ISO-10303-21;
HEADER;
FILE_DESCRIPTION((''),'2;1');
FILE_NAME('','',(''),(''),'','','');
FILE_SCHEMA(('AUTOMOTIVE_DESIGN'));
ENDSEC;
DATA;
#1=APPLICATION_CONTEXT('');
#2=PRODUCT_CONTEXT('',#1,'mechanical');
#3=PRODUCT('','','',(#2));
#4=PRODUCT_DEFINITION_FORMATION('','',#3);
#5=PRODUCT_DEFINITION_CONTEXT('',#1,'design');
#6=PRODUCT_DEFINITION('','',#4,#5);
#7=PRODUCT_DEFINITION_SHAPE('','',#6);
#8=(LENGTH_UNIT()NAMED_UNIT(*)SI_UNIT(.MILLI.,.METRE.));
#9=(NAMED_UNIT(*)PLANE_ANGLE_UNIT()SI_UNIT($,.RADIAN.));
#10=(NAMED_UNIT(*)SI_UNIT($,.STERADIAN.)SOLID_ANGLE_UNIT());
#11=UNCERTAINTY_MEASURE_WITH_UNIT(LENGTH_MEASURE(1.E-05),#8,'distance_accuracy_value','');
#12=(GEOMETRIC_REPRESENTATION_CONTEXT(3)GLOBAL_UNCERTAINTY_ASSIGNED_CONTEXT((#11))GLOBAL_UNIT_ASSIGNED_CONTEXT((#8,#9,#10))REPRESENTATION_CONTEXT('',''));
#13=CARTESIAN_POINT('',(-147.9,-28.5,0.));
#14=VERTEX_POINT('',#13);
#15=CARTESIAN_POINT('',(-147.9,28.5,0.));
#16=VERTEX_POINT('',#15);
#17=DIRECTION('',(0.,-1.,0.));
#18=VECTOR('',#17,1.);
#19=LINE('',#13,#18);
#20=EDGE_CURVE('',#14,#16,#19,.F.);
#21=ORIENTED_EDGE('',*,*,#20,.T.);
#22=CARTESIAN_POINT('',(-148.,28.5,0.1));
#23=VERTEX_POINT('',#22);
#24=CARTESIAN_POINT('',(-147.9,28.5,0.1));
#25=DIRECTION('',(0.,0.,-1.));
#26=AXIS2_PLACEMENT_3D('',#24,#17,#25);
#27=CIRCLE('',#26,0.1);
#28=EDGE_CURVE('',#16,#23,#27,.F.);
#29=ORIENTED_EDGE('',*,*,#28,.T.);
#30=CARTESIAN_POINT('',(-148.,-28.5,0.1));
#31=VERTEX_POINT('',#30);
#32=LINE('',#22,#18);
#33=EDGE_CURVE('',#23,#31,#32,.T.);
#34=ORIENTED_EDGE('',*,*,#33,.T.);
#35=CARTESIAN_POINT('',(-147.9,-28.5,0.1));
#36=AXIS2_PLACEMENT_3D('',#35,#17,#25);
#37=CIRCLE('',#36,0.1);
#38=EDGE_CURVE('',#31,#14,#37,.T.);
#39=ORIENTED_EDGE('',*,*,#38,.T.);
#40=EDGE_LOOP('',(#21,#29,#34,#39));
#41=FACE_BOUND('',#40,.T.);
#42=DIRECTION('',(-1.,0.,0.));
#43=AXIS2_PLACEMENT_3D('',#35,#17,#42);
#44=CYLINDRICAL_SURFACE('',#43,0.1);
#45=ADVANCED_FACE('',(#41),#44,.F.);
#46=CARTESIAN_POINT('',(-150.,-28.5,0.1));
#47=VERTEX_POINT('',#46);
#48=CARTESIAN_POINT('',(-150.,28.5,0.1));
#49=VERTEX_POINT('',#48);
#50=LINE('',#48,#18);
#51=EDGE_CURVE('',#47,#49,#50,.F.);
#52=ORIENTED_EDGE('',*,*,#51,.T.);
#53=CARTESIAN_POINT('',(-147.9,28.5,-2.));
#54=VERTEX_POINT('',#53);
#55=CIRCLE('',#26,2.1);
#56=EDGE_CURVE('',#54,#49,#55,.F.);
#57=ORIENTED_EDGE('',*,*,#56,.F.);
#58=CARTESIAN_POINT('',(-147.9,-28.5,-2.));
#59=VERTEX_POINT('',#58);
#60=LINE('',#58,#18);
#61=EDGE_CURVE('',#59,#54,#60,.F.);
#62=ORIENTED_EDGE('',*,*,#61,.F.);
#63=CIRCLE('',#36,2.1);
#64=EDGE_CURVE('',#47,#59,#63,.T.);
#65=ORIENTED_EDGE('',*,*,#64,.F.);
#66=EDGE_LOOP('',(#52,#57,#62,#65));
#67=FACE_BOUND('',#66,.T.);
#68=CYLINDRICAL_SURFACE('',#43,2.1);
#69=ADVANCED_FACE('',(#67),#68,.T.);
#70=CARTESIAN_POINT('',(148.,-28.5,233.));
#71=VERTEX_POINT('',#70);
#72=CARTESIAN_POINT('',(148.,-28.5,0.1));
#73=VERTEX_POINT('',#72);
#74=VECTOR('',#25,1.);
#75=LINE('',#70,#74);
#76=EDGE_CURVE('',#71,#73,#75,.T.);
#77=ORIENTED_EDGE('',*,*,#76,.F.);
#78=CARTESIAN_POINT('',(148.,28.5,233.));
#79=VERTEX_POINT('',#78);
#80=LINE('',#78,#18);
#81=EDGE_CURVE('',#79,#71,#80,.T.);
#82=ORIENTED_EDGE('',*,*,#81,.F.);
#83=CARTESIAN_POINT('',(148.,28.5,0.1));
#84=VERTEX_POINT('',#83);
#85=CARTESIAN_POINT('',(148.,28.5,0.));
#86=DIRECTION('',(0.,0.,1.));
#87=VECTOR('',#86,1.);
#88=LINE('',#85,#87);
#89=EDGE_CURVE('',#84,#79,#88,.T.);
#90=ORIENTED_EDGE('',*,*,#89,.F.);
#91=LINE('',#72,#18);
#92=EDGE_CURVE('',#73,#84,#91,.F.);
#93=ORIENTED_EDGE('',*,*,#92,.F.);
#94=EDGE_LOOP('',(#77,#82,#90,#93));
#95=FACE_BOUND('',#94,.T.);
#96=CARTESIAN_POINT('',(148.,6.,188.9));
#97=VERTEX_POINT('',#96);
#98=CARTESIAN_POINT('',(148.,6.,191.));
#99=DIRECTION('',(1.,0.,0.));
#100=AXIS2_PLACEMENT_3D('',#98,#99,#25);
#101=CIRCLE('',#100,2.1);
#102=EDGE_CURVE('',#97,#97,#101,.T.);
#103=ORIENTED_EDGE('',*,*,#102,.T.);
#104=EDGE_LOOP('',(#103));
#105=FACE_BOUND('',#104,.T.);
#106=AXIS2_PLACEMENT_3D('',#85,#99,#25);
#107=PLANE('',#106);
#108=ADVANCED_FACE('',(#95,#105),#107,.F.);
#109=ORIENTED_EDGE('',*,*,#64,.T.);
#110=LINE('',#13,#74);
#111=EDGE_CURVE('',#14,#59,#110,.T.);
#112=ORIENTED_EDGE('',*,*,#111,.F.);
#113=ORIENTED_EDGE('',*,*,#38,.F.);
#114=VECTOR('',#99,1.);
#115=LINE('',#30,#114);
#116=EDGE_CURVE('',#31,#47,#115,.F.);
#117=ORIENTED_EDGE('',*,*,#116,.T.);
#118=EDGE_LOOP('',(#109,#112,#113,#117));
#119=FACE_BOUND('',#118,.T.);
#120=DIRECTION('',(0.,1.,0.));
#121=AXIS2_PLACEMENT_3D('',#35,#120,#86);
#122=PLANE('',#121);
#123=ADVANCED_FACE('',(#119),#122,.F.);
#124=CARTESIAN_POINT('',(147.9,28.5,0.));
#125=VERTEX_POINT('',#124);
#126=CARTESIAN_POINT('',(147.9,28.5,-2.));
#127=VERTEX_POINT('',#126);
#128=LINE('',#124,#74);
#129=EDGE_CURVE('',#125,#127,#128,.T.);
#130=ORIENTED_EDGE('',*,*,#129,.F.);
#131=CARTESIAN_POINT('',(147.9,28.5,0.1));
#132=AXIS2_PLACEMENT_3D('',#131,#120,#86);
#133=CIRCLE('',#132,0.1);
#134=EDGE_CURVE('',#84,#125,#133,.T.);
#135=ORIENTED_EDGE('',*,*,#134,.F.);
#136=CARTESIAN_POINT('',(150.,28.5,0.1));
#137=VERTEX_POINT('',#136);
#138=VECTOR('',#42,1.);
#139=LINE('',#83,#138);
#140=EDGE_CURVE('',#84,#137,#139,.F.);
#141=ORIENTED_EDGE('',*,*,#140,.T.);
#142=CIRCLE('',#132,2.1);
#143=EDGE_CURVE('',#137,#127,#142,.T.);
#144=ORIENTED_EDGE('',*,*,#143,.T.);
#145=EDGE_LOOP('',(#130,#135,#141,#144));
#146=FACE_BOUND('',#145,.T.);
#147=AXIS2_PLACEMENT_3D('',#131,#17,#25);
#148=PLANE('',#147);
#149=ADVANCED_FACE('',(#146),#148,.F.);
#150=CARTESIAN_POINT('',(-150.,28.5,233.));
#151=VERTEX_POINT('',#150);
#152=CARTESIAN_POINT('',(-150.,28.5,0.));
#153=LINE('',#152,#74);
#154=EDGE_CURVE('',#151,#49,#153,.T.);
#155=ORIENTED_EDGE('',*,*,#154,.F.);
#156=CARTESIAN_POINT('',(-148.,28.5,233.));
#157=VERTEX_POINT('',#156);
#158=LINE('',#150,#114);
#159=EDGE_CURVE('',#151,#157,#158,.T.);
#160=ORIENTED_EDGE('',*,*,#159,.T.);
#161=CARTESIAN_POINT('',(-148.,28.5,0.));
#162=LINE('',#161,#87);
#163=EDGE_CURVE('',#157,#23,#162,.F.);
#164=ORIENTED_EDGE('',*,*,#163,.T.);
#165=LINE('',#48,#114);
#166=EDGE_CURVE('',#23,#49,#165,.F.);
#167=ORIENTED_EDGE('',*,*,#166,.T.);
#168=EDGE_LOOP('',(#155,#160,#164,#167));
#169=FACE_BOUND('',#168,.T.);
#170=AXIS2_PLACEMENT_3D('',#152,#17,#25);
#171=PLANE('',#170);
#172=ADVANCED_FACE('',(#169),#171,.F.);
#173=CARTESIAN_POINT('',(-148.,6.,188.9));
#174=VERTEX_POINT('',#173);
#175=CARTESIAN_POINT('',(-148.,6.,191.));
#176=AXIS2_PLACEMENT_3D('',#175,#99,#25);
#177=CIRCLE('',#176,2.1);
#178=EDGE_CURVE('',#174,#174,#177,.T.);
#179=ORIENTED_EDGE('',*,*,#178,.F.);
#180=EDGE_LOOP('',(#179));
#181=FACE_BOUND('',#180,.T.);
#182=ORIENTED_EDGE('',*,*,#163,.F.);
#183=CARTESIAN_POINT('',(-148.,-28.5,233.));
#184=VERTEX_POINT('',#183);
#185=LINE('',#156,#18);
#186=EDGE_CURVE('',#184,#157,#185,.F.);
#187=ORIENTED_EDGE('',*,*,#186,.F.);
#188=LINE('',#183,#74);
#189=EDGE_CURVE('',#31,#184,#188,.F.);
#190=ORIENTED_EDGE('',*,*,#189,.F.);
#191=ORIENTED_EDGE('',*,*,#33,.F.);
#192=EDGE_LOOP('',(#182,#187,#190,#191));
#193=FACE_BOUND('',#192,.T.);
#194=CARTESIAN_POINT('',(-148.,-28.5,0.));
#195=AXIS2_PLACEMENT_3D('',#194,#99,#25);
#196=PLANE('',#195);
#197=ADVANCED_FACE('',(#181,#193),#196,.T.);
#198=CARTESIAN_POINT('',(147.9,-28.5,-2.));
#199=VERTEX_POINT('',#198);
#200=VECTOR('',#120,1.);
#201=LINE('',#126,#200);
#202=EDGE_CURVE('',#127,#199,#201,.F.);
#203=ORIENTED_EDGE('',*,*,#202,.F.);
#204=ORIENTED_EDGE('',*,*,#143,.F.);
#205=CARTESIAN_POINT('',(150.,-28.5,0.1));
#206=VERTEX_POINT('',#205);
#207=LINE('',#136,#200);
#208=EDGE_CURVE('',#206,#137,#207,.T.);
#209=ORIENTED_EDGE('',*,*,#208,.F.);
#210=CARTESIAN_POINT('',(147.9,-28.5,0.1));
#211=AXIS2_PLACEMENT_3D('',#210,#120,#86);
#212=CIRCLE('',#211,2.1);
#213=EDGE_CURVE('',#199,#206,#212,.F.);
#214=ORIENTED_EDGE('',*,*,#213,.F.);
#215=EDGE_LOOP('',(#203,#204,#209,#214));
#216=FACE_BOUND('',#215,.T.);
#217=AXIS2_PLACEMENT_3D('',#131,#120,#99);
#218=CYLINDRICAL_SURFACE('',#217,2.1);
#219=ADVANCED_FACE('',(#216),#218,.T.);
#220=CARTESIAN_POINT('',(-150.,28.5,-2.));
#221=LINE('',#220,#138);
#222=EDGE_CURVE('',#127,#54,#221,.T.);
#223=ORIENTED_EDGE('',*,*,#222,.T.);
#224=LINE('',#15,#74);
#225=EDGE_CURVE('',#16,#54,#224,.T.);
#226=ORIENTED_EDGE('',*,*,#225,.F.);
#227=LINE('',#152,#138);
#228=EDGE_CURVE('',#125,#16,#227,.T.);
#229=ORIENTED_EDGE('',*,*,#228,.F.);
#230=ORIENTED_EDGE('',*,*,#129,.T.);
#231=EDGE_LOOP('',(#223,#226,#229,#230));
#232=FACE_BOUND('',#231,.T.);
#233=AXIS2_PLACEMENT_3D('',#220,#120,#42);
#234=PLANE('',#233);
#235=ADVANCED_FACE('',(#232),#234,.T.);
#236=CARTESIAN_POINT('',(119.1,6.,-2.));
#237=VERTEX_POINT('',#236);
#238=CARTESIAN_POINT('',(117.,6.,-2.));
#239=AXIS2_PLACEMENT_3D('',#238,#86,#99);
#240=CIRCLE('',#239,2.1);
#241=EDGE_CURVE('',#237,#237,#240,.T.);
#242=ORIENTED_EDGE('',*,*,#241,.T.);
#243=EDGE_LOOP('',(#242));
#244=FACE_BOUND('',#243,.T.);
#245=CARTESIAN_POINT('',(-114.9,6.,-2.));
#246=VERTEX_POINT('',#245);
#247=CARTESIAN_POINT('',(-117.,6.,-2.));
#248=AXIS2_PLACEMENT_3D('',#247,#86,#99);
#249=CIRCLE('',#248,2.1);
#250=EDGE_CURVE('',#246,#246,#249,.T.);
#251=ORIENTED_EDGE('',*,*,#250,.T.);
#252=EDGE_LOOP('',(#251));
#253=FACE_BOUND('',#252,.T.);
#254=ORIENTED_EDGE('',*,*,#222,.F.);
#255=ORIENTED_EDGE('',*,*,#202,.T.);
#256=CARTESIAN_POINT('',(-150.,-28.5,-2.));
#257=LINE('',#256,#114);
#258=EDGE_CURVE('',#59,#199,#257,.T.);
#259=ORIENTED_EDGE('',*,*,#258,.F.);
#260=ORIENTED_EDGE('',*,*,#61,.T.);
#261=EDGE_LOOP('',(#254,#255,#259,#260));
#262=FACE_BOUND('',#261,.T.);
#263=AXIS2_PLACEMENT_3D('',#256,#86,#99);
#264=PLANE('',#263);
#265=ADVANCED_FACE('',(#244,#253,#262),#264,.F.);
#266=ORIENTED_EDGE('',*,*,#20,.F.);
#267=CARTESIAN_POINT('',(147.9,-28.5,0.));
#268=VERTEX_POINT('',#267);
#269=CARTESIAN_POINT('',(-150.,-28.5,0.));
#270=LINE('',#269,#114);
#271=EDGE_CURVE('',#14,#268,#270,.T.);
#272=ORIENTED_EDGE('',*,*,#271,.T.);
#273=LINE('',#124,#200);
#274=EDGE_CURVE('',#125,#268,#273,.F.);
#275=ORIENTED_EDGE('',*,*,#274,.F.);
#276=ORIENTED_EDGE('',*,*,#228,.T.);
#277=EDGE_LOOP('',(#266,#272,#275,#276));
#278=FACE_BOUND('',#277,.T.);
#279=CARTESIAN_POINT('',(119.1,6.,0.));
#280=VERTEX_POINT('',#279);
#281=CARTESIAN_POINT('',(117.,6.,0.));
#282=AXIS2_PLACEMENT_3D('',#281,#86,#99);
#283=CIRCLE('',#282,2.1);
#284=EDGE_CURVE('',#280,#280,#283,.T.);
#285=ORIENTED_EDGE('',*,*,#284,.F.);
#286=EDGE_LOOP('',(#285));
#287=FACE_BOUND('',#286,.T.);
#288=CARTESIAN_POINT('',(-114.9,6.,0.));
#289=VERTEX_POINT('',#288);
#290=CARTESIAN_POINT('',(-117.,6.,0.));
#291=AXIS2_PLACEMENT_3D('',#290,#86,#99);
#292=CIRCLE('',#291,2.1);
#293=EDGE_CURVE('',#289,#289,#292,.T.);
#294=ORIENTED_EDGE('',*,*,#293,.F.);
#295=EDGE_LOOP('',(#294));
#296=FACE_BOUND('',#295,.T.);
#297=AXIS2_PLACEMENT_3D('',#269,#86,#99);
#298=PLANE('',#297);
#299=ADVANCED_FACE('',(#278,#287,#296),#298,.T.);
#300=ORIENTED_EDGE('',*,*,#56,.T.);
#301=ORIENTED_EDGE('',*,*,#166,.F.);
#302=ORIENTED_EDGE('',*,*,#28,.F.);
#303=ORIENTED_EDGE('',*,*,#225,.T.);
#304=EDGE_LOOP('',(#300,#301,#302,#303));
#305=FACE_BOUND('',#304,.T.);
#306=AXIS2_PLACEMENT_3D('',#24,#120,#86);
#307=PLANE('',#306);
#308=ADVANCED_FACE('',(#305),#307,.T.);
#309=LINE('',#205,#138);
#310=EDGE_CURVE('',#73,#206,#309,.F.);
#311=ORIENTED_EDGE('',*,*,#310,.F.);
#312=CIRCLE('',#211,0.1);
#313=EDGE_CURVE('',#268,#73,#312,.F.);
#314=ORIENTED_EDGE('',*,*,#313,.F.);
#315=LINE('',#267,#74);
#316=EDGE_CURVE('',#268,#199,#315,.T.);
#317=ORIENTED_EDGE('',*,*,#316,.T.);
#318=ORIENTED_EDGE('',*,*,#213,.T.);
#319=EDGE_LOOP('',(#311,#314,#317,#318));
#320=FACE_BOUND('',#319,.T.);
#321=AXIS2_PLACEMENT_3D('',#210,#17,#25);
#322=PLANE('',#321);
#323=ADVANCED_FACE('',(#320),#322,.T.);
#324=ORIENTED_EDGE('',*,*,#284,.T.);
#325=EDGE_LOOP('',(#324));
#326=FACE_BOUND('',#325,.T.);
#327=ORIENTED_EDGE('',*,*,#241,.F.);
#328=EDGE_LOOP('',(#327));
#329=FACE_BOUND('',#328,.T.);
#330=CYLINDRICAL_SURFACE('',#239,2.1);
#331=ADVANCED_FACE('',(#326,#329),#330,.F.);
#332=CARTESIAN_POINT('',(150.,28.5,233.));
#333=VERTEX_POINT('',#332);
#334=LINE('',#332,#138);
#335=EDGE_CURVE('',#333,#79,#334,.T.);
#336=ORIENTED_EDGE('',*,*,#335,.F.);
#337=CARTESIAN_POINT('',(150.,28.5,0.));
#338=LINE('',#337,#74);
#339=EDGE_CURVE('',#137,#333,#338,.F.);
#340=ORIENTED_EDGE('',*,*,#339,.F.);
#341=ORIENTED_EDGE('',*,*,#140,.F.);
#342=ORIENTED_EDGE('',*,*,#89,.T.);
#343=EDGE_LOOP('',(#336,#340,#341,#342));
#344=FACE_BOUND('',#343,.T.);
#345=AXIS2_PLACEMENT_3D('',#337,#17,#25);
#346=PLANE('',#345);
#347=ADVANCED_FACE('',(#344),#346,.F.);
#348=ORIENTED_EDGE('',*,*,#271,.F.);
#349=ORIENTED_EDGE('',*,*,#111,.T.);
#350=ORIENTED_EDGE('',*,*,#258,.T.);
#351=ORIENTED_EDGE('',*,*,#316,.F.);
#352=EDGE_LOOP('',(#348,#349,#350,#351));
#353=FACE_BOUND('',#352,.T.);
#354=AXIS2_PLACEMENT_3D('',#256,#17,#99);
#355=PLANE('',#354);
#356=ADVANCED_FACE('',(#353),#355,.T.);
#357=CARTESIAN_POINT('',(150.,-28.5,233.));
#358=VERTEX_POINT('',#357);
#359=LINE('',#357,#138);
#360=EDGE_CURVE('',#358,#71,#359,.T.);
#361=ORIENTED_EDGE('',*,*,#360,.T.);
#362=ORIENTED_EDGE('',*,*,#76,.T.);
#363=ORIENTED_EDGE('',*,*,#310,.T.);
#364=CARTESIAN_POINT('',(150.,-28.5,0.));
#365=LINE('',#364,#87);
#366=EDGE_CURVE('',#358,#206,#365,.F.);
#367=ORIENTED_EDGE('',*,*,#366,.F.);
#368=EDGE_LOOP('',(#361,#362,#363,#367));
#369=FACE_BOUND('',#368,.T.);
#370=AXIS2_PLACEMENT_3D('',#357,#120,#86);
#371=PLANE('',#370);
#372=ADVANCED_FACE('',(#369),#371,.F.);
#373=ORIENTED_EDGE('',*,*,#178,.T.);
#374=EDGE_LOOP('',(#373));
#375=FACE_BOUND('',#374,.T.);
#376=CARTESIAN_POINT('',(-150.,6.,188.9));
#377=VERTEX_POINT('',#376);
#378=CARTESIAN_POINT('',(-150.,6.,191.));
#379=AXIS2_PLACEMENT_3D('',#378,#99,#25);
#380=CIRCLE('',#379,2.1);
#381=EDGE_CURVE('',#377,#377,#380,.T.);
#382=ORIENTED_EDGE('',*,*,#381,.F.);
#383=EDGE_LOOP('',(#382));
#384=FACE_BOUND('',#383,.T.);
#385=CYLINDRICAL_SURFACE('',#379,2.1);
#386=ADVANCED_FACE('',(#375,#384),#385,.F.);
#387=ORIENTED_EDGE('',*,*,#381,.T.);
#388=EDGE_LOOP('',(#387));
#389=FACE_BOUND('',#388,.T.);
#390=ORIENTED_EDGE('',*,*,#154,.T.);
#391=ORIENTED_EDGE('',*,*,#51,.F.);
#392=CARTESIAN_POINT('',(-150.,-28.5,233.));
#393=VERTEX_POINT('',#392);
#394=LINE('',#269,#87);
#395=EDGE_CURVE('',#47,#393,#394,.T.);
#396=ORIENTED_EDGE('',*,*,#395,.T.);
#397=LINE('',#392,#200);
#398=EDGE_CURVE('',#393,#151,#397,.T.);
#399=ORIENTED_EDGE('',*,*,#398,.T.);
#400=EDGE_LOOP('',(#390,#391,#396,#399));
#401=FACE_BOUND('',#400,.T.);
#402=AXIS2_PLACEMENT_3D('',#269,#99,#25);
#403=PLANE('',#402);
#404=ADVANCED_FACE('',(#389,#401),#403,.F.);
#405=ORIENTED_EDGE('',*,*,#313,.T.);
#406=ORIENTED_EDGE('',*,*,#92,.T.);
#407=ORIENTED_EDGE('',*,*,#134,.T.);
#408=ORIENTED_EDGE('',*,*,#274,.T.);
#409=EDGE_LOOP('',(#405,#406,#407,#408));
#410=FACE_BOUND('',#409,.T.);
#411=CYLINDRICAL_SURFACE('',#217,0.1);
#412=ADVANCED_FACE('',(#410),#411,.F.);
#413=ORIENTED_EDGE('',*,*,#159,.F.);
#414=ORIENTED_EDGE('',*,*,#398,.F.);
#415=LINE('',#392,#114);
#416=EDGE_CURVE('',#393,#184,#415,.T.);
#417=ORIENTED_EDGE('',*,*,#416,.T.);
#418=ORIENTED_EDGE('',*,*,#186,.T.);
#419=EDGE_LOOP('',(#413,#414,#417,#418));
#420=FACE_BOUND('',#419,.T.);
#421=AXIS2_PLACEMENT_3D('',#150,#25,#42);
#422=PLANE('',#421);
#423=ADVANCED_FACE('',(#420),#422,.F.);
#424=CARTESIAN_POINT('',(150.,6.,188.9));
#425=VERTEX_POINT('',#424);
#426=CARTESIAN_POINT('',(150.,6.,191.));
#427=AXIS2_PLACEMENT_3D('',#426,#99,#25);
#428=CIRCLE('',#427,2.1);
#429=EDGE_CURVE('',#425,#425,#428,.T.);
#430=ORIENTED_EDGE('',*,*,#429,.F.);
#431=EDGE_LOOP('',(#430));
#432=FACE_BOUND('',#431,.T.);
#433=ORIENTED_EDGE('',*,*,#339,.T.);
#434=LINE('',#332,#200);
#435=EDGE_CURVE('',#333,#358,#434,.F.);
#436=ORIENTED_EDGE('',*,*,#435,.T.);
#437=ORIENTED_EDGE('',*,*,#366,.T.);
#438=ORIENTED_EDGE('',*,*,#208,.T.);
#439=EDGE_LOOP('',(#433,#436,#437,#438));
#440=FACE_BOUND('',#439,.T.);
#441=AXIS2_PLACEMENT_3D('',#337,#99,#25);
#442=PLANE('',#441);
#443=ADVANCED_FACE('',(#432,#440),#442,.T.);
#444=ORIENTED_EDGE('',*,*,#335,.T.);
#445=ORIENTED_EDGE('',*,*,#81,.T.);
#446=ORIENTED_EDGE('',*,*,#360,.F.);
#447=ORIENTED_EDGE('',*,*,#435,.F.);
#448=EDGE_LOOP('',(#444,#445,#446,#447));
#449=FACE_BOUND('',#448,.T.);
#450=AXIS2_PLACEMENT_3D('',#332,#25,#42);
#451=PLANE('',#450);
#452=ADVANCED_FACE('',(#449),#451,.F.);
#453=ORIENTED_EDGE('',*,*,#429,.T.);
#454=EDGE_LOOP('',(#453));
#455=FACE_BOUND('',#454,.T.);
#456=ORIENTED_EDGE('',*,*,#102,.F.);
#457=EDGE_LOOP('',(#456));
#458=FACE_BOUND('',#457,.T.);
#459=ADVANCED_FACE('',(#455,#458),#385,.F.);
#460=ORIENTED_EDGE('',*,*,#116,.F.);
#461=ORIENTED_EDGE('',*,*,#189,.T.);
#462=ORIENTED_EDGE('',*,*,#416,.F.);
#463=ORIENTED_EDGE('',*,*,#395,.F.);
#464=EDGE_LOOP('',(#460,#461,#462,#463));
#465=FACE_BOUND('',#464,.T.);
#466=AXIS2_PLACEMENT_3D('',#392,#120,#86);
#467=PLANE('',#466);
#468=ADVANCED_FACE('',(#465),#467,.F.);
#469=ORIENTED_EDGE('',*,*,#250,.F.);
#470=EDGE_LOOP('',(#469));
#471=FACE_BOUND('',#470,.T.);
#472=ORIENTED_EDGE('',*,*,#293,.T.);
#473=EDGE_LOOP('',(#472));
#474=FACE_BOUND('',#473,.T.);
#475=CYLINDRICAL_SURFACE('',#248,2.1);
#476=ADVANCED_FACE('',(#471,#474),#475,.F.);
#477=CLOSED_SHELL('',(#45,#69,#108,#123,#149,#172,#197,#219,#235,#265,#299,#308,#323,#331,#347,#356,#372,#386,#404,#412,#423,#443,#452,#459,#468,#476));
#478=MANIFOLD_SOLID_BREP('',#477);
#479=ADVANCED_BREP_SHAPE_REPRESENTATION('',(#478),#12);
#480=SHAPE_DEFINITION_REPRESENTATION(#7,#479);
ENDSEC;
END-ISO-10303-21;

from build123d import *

# Parameters (mm, degrees)
SKIZZE1_W                       = 300
SKIZZE1_H                       = 57
SKIZZE1_R                       = 2.1
BASIS_BLECH1_DEPTH              = 2
KANTE_LASCHE1_STRIP_W           = 8.2
KANTE_LASCHE1_STRIP_H           = 2
KANTE_LASCHE1_STRIP_CUT_DEPTH   = 57
KANTE_LASCHE1_STRIP_2_W         = 8.2
KANTE_LASCHE1_STRIP_2_H         = 2
KANTE_LASCHE1_STRIP_CUT_2_DEPTH = 57
KANTE_LASCHE1_DEPTH             = 57
KANTE_LASCHE1_BEND_DEPTH        = 57
SKIZZE10_R                      = 2.1
SCHNITT_LINEAR_AUSTRAGEN1_DEPTH = 381.921579856


# Sheet-metal steps are written as plain solids
with BuildPart() as part:
    # Skizze1 → Basis-Blech1 (new body)
    with BuildSketch(Plane.XY):
        Rectangle(SKIZZE1_W, SKIZZE1_H)
        with Locations((-117, 6)):
            Circle(SKIZZE1_R, mode=Mode.SUBTRACT)
        with Locations((117, 6)):
            Circle(SKIZZE1_R, mode=Mode.SUBTRACT)
    extrude(amount=-BASIS_BLECH1_DEPTH)

    # Kante-Lasche1 strip (across the edge) → Kante-Lasche1 strip cut (cut)
    with BuildSketch(Plane(origin=(-150, 28.5, 0), x_dir=(1, 0, 0), z_dir=(0, -1, 0))):
        with Locations((-2, -1)):
            Rectangle(KANTE_LASCHE1_STRIP_W, KANTE_LASCHE1_STRIP_H)
    extrude(amount=KANTE_LASCHE1_STRIP_CUT_DEPTH, mode=Mode.SUBTRACT)

    # Kante-Lasche1 strip 2 (across the edge) → Kante-Lasche1 strip cut 2 (cut)
    with BuildSketch(Plane(origin=(150, -28.5, 0), x_dir=(-1, 0, 0), z_dir=(0, 1, 0))):
        with Locations((-2, -1)):
            Rectangle(KANTE_LASCHE1_STRIP_2_W, KANTE_LASCHE1_STRIP_2_H)
    extrude(amount=KANTE_LASCHE1_STRIP_CUT_2_DEPTH, mode=Mode.SUBTRACT)

    # Kante-Lasche1 section (across the edge) → Kante-Lasche1 (add)
    with BuildSketch(Plane(origin=(-150, 28.5, 0), x_dir=(1, 0, 0), z_dir=(0, -1, 0))):
        with BuildLine():
            Line((0, 0.1), (0, 233))
            Line((0, 233), (2, 233))
            Line((2, 233), (2, 0.1))
            ThreePointArc((2, 0.1), (2.029289322, 0.029289322), (2.1, 0))
            Line((2.1, 0), (2.1, -2))
            ThreePointArc((2.1, -2), (0.61507576, -1.38492424), (0, 0.1))
        make_face()
    extrude(amount=KANTE_LASCHE1_DEPTH)

    # Kante-Lasche1 section 2 (across the edge) → Kante-Lasche1 bend (add)
    with BuildSketch(Plane(origin=(150, -28.5, 0), x_dir=(-1, 0, 0), z_dir=(0, 1, 0))):
        with BuildLine():
            Line((0, 0.1), (0, 233))
            Line((0, 233), (2, 233))
            Line((2, 233), (2, 0.1))
            ThreePointArc((2, 0.1), (2.029289322, 0.029289322), (2.1, 0))
            Line((2.1, 0), (2.1, -2))
            ThreePointArc((2.1, -2), (0.61507576, -1.38492424), (0, 0.1))
        make_face()
    extrude(amount=KANTE_LASCHE1_BEND_DEPTH)

    # Skizze10 → Schnitt-Linear austragen1 (cut, through all)
    with BuildSketch(Plane(origin=(150, 0, 0), x_dir=(0, 0, -1), z_dir=(1, 0, 0))):
        with Locations((-191, 6)):
            Circle(SKIZZE10_R)
    extrude(amount=-SCHNITT_LINEAR_AUSTRAGEN1_DEPTH, mode=Mode.SUBTRACT)


solid = part.part
